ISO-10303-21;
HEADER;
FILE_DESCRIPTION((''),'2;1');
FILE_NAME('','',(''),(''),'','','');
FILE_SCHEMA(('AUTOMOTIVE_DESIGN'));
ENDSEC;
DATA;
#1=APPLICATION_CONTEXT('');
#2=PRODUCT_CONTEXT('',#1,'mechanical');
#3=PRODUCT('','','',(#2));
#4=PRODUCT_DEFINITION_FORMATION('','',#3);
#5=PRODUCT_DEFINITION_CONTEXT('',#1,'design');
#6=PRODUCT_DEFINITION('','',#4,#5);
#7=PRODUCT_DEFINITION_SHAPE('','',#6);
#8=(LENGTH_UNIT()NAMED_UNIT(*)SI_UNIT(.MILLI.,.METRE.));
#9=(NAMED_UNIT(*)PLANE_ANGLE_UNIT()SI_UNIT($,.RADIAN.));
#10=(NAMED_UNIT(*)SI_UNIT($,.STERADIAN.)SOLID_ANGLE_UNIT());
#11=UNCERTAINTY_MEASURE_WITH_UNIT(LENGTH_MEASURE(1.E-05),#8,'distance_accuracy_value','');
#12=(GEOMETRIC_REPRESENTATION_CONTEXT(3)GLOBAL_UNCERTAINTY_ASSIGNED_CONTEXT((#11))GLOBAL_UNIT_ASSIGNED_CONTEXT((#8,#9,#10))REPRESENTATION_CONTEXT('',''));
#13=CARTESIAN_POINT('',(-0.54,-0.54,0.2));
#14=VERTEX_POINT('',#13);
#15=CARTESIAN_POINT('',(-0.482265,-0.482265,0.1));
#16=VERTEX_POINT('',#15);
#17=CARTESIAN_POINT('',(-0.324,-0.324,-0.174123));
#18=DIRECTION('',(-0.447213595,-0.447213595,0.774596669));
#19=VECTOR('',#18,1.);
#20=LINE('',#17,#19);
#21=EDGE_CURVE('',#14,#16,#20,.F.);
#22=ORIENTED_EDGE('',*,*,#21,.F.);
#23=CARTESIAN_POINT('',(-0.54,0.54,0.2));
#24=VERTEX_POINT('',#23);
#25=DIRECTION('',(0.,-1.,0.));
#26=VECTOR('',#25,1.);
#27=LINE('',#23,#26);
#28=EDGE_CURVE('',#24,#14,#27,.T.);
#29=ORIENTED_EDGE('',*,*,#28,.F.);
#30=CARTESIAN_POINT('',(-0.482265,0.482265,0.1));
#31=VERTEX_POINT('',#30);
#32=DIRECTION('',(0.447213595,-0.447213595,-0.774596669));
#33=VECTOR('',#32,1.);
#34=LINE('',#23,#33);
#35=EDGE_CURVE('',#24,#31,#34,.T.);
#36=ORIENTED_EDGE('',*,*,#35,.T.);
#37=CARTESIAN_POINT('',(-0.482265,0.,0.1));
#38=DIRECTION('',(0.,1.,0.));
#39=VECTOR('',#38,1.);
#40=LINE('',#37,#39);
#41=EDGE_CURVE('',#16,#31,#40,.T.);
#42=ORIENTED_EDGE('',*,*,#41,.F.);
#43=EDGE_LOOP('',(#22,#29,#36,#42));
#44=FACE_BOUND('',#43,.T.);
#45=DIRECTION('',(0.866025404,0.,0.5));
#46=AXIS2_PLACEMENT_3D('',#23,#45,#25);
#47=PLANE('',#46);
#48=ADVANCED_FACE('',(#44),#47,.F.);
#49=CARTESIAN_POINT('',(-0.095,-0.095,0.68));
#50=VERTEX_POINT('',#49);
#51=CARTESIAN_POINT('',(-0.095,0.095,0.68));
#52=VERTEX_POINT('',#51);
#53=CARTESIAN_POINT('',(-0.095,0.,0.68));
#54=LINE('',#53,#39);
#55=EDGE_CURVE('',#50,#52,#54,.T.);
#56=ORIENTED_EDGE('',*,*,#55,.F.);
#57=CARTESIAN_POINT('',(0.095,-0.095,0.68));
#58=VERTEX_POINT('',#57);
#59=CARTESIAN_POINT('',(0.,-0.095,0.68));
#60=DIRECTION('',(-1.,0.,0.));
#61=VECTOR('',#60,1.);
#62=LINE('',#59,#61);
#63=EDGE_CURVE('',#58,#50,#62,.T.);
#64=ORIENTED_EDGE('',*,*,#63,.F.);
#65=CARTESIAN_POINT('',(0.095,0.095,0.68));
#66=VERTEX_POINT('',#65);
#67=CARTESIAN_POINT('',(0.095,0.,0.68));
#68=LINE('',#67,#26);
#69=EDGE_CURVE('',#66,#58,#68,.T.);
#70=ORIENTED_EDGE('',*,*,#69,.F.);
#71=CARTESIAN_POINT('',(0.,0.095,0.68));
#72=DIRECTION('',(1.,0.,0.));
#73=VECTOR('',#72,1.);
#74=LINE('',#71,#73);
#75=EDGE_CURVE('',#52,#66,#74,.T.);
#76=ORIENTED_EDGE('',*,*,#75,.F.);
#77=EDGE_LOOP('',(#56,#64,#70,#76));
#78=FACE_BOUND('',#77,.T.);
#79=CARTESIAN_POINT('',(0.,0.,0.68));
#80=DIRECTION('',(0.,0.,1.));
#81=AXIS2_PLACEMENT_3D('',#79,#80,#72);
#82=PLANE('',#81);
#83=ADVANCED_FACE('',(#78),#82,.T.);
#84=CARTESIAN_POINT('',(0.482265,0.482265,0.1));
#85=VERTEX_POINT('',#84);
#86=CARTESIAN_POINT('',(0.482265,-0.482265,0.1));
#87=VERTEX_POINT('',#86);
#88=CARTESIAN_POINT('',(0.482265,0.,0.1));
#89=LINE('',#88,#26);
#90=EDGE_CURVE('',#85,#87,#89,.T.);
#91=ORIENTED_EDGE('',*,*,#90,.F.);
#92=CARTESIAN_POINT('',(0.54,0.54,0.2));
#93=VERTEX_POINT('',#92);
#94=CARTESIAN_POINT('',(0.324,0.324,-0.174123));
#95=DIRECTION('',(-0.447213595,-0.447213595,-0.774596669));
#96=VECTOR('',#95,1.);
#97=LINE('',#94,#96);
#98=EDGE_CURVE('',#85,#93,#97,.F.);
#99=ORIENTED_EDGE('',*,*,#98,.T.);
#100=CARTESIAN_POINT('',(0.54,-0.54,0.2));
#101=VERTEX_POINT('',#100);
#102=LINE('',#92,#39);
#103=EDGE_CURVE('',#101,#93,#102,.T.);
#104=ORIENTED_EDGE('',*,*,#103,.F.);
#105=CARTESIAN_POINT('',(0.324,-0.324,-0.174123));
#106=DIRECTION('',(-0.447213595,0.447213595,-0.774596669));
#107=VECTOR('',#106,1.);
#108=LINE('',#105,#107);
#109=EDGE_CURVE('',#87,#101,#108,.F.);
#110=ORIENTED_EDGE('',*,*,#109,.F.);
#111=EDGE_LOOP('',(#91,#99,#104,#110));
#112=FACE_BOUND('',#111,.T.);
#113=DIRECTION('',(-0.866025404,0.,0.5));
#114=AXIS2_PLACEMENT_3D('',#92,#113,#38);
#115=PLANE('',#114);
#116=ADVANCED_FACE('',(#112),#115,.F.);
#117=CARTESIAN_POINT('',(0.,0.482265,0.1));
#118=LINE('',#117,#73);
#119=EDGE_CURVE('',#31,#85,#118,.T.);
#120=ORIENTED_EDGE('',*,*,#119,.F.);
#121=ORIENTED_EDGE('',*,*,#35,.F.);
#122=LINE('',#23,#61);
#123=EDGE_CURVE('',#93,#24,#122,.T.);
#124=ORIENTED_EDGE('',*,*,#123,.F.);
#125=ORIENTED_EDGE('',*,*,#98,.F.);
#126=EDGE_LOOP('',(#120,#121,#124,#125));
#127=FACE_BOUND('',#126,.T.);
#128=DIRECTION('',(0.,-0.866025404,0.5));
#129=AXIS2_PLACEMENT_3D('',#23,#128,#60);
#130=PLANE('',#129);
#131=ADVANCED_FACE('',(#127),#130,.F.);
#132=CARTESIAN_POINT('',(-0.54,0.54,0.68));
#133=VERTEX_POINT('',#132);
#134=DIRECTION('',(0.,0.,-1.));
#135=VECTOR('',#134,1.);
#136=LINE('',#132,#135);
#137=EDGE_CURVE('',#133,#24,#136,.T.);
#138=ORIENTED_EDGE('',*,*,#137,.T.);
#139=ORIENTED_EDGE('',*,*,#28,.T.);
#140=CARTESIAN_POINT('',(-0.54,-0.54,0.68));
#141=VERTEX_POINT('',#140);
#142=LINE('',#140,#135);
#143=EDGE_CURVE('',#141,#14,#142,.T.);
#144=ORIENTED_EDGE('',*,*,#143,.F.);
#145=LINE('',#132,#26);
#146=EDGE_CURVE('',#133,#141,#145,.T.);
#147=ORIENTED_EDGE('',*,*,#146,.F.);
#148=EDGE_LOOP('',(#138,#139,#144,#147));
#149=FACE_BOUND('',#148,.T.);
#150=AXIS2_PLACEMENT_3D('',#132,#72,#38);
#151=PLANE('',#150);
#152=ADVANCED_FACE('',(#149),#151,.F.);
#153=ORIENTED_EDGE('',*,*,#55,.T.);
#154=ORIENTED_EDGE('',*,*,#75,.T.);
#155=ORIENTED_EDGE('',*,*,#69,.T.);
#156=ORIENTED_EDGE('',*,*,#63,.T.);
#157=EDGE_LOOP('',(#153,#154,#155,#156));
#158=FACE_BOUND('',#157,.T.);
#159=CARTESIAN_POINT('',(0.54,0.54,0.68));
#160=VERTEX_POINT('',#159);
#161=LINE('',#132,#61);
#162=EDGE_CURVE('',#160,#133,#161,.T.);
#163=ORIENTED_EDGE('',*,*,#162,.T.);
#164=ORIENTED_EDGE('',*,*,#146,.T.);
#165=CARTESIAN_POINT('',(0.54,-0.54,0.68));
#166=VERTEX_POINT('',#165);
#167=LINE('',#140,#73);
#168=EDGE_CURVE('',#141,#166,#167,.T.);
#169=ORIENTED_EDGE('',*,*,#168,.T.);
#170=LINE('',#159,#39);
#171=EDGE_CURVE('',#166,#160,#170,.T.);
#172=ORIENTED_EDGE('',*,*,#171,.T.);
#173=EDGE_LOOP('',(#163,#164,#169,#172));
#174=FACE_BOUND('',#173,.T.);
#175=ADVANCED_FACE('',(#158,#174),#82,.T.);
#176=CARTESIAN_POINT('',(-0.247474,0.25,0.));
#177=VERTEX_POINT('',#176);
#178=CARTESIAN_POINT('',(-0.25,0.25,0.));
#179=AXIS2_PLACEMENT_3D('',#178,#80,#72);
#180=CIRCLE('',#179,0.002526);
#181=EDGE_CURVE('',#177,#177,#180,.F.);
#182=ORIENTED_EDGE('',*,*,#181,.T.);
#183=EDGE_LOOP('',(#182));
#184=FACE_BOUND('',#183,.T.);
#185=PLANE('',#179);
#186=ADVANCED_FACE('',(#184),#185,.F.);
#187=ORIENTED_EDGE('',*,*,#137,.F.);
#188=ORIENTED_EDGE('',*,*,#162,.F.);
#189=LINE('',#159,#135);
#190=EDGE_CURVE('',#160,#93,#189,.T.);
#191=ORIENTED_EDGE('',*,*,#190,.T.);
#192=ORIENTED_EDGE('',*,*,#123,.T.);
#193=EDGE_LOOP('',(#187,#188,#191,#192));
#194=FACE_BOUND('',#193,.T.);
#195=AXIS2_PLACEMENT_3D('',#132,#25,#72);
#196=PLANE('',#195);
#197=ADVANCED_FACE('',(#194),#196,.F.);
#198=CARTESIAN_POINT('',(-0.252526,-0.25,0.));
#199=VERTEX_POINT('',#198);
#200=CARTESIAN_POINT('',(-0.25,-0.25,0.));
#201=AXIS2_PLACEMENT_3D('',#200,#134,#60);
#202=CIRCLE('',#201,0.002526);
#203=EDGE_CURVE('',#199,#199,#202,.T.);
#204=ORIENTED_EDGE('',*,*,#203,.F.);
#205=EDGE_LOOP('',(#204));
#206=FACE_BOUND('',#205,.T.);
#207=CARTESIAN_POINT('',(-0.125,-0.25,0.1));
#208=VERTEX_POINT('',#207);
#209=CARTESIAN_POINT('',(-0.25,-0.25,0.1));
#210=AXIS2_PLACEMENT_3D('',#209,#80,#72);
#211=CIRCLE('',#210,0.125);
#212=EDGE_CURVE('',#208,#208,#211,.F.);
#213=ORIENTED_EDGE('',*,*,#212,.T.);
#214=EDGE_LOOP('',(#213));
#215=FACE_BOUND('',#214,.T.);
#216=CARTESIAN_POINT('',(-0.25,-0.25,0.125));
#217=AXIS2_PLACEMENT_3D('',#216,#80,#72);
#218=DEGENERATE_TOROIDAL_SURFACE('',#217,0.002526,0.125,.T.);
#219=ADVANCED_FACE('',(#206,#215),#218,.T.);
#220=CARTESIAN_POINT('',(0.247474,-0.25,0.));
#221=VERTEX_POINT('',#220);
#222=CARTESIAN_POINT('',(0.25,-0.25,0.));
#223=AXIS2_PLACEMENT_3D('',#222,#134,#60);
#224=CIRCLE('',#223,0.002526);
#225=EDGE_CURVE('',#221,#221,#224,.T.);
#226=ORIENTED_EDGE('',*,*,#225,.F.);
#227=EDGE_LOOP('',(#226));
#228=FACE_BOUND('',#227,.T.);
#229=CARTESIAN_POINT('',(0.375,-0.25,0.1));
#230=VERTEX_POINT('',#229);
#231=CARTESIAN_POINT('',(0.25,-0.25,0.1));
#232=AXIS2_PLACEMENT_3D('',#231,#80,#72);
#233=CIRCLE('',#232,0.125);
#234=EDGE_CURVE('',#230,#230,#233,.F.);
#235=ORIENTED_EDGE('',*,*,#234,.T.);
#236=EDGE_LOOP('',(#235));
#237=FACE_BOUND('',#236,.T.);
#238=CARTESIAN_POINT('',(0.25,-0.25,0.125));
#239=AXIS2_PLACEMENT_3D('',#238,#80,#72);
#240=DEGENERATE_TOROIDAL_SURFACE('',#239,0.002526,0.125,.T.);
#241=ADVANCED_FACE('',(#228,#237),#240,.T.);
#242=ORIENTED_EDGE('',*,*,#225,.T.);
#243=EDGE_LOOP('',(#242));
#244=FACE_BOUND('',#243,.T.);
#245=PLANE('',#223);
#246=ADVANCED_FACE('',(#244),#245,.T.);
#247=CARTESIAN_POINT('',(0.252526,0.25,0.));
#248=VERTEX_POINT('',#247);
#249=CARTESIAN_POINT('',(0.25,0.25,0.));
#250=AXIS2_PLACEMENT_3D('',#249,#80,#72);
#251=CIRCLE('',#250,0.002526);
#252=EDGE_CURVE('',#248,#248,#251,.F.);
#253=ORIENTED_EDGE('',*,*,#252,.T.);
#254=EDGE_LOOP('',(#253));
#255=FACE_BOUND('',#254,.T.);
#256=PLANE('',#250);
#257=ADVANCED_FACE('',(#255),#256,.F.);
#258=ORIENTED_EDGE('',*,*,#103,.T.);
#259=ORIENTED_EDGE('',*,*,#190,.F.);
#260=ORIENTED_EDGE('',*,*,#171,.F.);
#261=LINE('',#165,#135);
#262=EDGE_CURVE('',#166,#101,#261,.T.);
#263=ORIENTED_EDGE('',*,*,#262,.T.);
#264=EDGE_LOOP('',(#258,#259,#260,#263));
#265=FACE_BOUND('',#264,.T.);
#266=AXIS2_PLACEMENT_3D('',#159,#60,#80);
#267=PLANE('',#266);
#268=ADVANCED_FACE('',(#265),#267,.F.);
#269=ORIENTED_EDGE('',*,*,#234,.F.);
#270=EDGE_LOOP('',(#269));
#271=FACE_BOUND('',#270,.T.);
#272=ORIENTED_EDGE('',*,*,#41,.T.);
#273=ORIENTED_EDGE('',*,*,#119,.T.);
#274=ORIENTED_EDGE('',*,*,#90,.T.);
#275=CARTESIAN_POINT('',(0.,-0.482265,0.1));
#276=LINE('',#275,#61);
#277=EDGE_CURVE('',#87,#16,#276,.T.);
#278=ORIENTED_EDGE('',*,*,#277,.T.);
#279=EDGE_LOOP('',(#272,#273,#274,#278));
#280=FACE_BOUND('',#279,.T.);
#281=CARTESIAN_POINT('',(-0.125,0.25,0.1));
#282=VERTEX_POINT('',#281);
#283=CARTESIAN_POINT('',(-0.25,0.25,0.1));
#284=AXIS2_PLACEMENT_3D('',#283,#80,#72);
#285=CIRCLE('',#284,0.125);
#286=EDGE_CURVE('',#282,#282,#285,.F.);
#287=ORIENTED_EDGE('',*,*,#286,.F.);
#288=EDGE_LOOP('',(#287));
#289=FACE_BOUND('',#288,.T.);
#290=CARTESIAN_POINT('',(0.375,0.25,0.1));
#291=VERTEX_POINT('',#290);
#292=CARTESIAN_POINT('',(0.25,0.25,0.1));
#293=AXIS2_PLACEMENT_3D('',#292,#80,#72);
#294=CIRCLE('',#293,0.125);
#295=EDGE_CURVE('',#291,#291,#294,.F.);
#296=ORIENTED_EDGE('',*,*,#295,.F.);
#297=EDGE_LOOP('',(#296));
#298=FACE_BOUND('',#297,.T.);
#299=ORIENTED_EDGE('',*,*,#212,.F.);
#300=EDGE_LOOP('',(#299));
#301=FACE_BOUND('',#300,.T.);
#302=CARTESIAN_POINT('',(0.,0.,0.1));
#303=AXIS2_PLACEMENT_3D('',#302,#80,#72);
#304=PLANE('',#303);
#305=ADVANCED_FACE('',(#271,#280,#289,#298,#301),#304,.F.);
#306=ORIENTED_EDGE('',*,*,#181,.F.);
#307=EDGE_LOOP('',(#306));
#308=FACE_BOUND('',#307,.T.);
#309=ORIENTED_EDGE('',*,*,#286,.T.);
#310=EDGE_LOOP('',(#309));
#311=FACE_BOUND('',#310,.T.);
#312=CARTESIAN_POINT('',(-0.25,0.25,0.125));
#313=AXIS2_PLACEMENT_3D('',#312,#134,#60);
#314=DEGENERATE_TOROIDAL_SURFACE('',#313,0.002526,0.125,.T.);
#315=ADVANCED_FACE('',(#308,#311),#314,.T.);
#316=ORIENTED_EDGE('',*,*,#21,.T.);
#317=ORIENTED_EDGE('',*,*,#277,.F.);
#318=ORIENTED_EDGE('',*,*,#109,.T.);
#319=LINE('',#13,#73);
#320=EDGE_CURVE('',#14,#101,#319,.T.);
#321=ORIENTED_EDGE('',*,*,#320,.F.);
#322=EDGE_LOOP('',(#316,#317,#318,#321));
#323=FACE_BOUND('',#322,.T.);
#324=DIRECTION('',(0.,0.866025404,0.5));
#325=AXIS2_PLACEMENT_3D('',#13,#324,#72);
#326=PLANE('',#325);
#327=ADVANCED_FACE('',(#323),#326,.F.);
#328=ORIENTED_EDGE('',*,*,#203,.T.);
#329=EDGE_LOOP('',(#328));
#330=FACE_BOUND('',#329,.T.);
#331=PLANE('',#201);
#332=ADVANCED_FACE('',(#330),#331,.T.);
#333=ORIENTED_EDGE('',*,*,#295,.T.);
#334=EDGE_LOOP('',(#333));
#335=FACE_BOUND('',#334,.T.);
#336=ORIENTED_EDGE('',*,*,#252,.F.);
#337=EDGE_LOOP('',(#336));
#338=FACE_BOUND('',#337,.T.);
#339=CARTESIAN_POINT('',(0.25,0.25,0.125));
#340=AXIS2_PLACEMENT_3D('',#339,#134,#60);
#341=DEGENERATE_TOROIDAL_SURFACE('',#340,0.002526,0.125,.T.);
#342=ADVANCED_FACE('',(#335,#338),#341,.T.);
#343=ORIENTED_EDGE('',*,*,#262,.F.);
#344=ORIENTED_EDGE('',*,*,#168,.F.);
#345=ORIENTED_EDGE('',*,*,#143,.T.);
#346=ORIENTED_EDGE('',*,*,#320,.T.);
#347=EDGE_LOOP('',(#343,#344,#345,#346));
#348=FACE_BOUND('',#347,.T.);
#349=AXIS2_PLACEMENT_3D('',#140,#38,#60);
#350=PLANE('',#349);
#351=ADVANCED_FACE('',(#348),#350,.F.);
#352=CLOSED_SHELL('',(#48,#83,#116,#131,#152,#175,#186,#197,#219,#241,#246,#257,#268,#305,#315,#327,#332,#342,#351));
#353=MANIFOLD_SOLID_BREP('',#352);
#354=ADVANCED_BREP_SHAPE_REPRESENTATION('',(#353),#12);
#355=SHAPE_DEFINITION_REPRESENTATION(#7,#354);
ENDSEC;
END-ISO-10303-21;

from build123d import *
from OCP.BRepFilletAPI import BRepFilletAPI_MakeChamfer

# Parameters (mm, degrees)
SKETCH2_W           = 1.08
SKETCH2_H           = 1.08
BOSS_EXTRUDE1_DEPTH = 0.68
MOVE_FACE1_BY       = 0.1
CHAMFER1_SIZE       = 0.1
CHAMFER1_SIZE2      = 0.057735027
SKETCH3_R           = 0.125
BOSS_EXTRUDE2_DEPTH = 0.1
FILLET1_R           = 0.125


with BuildPart() as part:
    # Sketch2 → Boss-Extrude1 (new body)
    with BuildSketch(Plane.XY):
        Rectangle(SKETCH2_W, SKETCH2_H)
    extrude(amount=BOSS_EXTRUDE1_DEPTH)

    # Move Face1: a face moved inward by 0.1
    extrude(part.faces().sort_by_distance((0, 0, 0))[0], amount=MOVE_FACE1_BY, dir=(0, 0, 1), mode=Mode.SUBTRACT)

    # Chamfer1: one chamfer whose edges measure the first distance from different faces: ONE call of the kernel's chamfer builder (chamfer() names one face for all edges)
    chamfer1_edges_1 = [part.edges().sort_by_distance(p)[0] for p in [
        (0, 0.54, 0.1),
    ]]
    chamfer1_side_1 = [part.faces().sort_by_distance(p)[0] for p in [
        (0, 0.54, 0.39),
    ]]
    chamfer1_edges_2 = [part.edges().sort_by_distance(p)[0] for p in [
        (0.54, 0, 0.1),
    ]]
    chamfer1_side_2 = [part.faces().sort_by_distance(p)[0] for p in [
        (0.54, 0, 0.39),
    ]]
    chamfer1_edges_3 = [part.edges().sort_by_distance(p)[0] for p in [
        (0, -0.54, 0.1),
    ]]
    chamfer1_side_3 = [part.faces().sort_by_distance(p)[0] for p in [
        (0, -0.54, 0.39),
    ]]
    chamfer1_edges_4 = [part.edges().sort_by_distance(p)[0] for p in [
        (-0.54, 0, 0.1),
    ]]
    chamfer1_side_4 = [part.faces().sort_by_distance(p)[0] for p in [
        (-0.54, 0, 0.39),
    ]]
    chamfer1 = BRepFilletAPI_MakeChamfer(part.part.solid().wrapped)
    for e in chamfer1_edges_1:
        chamfer1.Add(CHAMFER1_SIZE, CHAMFER1_SIZE2, e.wrapped, chamfer1_side_1[0].wrapped)  # the first distance lies on this face
    for e in chamfer1_edges_2:
        chamfer1.Add(CHAMFER1_SIZE, CHAMFER1_SIZE2, e.wrapped, chamfer1_side_2[0].wrapped)  # the first distance lies on this face
    for e in chamfer1_edges_3:
        chamfer1.Add(CHAMFER1_SIZE, CHAMFER1_SIZE2, e.wrapped, chamfer1_side_3[0].wrapped)  # the first distance lies on this face
    for e in chamfer1_edges_4:
        chamfer1.Add(CHAMFER1_SIZE, CHAMFER1_SIZE2, e.wrapped, chamfer1_side_4[0].wrapped)  # the first distance lies on this face
    add(Compound.cast(chamfer1.Shape()), mode=Mode.REPLACE)

    # Sketch3 → Boss-Extrude2 (add)
    with BuildSketch(Plane.XY):
        with Locations((-0.25, 0.25)):
            Circle(SKETCH3_R)
        with Locations(Location((0.25, -0.25, 0), (0, 0, 180))):
            Circle(SKETCH3_R)
        with Locations((0.25, 0.25)):
            Circle(SKETCH3_R)
        with Locations(Location((-0.25, -0.25, 0), (0, 0, 180))):
            Circle(SKETCH3_R)
    extrude(amount=BOSS_EXTRUDE2_DEPTH)

    # Fillet1
    # the kernel refuses this fillet: 0.125 mm, written as the material it takes off along each edge
    with BuildSketch(Plane(origin=(-0.25, 0.25, 0), x_dir=(1, 0, 0), z_dir=(0, -1, 0))) as fillet1_piece_1:
        with BuildLine():
            CenterArc((0.002525513, 0.125), FILLET1_R, 270, 78.463040967)
            Line((0.002525513, 0), (0.002525513, -0.0025))
            Line((0.002525513, -0.0025), (0.125, -0.0025))
            Line((0.125, -0.0025), (0.1275, 0))
            ThreePointArc((0.1275, 0), (0.1275, 0.05), (0.12744949, 0.0995))
            Line((0.12744949, 0.0995), (0.125, 0.1))
        make_face()
    revolve(axis=Axis((-0.25, 0.25, 0), (0, 0, 1)), mode=Mode.SUBTRACT)
    with BuildSketch(Plane(origin=(0.25, -0.25, 0), x_dir=(-1, 0, 0), z_dir=(0, 1, 0))) as fillet1_piece_2:
        with BuildLine():
            CenterArc((0.002525513, 0.125), FILLET1_R, 270, 78.463040967)
            Line((0.002525513, 0), (0.002525513, -0.0025))
            Line((0.002525513, -0.0025), (0.125, -0.0025))
            Line((0.125, -0.0025), (0.1275, 0))
            ThreePointArc((0.1275, 0), (0.1275, 0.05), (0.12744949, 0.0995))
            Line((0.12744949, 0.0995), (0.125, 0.1))
        make_face()
    revolve(axis=Axis((0.25, -0.25, 0), (0, 0, 1)), mode=Mode.SUBTRACT)
    with BuildSketch(Plane(origin=(0.25, 0.25, 0), x_dir=(1, 0, 0), z_dir=(0, -1, 0))) as fillet1_piece_3:
        with BuildLine():
            CenterArc((0.002525513, 0.125), FILLET1_R, 270, 78.463040967)
            Line((0.002525513, 0), (0.002525513, -0.0025))
            Line((0.002525513, -0.0025), (0.125, -0.0025))
            Line((0.125, -0.0025), (0.1275, 0))
            ThreePointArc((0.1275, 0), (0.1275, 0.05), (0.12744949, 0.0995))
            Line((0.12744949, 0.0995), (0.125, 0.1))
        make_face()
    revolve(axis=Axis((0.25, 0.25, 0), (0, 0, 1)), mode=Mode.SUBTRACT)
    with BuildSketch(Plane(origin=(-0.25, -0.25, 0), x_dir=(-1, 0, 0), z_dir=(0, 1, 0))) as fillet1_piece_4:
        with BuildLine():
            CenterArc((0.002525513, 0.125), FILLET1_R, 270, 78.463040967)
            Line((0.002525513, 0), (0.002525513, -0.0025))
            Line((0.002525513, -0.0025), (0.125, -0.0025))
            Line((0.125, -0.0025), (0.1275, 0))
            ThreePointArc((0.1275, 0), (0.1275, 0.05), (0.12744949, 0.0995))
            Line((0.12744949, 0.0995), (0.125, 0.1))
        make_face()
    revolve(axis=Axis((-0.25, -0.25, 0), (0, 0, 1)), mode=Mode.SUBTRACT)


solid = part.part
